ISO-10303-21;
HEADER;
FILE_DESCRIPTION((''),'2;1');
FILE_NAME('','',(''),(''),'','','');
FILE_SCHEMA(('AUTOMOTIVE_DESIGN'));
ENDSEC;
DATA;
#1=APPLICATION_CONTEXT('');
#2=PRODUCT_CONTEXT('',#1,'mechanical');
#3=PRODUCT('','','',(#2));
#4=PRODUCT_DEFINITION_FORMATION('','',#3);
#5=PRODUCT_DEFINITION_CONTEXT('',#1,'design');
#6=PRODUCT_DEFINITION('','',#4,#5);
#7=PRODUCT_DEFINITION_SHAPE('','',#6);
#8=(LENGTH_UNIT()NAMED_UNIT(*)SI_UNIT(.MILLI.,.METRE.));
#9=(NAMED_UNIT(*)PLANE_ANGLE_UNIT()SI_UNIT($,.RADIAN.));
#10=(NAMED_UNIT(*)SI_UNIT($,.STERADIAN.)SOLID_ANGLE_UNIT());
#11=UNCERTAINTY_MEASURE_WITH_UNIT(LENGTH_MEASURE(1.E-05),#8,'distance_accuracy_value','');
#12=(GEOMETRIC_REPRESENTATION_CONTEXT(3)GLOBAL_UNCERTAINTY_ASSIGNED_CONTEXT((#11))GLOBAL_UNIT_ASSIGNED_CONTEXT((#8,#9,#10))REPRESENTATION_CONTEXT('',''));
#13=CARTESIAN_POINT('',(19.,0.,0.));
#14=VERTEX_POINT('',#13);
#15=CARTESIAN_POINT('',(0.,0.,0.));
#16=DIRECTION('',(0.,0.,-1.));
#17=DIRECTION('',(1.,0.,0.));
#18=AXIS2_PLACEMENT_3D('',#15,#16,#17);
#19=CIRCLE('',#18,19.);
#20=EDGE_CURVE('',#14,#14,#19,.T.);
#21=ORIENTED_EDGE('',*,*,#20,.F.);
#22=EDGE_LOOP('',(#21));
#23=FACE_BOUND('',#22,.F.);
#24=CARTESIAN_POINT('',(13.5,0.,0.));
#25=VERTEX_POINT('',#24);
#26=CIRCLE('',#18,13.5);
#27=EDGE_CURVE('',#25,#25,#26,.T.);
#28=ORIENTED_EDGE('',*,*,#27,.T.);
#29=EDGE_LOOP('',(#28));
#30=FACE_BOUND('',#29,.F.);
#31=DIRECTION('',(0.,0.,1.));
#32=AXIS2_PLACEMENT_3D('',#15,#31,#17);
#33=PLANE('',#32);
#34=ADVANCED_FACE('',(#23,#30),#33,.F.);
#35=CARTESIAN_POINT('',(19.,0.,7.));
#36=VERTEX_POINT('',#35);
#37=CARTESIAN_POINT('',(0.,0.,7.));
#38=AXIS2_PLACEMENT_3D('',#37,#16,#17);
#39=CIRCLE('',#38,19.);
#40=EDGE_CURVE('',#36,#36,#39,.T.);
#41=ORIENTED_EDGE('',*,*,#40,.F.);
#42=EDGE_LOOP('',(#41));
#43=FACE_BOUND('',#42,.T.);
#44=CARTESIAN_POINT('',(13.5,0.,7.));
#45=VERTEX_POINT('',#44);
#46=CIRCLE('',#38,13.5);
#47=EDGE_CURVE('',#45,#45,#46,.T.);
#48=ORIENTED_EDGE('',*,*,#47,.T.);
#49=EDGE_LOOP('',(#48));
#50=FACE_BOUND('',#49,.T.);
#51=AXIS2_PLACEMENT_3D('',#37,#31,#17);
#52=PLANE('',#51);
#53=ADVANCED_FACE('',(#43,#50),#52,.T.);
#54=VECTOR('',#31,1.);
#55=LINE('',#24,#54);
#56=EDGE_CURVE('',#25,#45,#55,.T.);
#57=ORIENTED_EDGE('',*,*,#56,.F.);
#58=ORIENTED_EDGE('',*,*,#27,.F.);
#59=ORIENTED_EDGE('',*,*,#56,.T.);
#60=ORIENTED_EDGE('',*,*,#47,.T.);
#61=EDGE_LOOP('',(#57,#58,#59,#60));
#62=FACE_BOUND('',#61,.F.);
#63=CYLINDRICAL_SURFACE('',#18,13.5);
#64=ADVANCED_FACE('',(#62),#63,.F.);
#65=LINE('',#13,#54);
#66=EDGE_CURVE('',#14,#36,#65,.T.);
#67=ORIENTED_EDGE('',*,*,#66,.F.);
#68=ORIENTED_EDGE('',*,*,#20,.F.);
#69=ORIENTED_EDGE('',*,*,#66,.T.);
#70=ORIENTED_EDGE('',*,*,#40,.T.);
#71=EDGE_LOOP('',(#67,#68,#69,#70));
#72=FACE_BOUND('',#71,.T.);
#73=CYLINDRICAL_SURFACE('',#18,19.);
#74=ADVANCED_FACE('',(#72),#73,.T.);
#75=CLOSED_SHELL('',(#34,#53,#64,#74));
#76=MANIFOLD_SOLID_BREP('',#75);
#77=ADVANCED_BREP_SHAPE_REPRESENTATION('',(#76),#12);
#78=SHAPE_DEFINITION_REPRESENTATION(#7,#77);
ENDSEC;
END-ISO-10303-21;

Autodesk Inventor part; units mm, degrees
ref_plane "YZ Plane" through (0, 0, 0) normal (1, 0, 0) x (0, 1, 0)
ref_plane "XZ Plane" through (0, 0, 0) normal (0, 1, 0) x (-1, 0, 0)
ref_plane "XY Plane" through (0, 0, 0) normal (0, 0, 1) x (1, 0, 0)
sketch "Sketch1" plane through (0, 0, 0) normal (0, 0, 1) x (1, 0, 0)
  circle A0 centre (0, 0) radius 19
  circle A1 centre (0, 0) radius 13.5
  dimension "d0" = 38
  dimension "d1" = 27
extrude "Extrusion1" add sketch "Sketch1" along normal blind 5
move faces "Move1" translate (0, 0, 2) faces at (16.8519, -2.5926, 5)
properties part number "arm-bearings"
